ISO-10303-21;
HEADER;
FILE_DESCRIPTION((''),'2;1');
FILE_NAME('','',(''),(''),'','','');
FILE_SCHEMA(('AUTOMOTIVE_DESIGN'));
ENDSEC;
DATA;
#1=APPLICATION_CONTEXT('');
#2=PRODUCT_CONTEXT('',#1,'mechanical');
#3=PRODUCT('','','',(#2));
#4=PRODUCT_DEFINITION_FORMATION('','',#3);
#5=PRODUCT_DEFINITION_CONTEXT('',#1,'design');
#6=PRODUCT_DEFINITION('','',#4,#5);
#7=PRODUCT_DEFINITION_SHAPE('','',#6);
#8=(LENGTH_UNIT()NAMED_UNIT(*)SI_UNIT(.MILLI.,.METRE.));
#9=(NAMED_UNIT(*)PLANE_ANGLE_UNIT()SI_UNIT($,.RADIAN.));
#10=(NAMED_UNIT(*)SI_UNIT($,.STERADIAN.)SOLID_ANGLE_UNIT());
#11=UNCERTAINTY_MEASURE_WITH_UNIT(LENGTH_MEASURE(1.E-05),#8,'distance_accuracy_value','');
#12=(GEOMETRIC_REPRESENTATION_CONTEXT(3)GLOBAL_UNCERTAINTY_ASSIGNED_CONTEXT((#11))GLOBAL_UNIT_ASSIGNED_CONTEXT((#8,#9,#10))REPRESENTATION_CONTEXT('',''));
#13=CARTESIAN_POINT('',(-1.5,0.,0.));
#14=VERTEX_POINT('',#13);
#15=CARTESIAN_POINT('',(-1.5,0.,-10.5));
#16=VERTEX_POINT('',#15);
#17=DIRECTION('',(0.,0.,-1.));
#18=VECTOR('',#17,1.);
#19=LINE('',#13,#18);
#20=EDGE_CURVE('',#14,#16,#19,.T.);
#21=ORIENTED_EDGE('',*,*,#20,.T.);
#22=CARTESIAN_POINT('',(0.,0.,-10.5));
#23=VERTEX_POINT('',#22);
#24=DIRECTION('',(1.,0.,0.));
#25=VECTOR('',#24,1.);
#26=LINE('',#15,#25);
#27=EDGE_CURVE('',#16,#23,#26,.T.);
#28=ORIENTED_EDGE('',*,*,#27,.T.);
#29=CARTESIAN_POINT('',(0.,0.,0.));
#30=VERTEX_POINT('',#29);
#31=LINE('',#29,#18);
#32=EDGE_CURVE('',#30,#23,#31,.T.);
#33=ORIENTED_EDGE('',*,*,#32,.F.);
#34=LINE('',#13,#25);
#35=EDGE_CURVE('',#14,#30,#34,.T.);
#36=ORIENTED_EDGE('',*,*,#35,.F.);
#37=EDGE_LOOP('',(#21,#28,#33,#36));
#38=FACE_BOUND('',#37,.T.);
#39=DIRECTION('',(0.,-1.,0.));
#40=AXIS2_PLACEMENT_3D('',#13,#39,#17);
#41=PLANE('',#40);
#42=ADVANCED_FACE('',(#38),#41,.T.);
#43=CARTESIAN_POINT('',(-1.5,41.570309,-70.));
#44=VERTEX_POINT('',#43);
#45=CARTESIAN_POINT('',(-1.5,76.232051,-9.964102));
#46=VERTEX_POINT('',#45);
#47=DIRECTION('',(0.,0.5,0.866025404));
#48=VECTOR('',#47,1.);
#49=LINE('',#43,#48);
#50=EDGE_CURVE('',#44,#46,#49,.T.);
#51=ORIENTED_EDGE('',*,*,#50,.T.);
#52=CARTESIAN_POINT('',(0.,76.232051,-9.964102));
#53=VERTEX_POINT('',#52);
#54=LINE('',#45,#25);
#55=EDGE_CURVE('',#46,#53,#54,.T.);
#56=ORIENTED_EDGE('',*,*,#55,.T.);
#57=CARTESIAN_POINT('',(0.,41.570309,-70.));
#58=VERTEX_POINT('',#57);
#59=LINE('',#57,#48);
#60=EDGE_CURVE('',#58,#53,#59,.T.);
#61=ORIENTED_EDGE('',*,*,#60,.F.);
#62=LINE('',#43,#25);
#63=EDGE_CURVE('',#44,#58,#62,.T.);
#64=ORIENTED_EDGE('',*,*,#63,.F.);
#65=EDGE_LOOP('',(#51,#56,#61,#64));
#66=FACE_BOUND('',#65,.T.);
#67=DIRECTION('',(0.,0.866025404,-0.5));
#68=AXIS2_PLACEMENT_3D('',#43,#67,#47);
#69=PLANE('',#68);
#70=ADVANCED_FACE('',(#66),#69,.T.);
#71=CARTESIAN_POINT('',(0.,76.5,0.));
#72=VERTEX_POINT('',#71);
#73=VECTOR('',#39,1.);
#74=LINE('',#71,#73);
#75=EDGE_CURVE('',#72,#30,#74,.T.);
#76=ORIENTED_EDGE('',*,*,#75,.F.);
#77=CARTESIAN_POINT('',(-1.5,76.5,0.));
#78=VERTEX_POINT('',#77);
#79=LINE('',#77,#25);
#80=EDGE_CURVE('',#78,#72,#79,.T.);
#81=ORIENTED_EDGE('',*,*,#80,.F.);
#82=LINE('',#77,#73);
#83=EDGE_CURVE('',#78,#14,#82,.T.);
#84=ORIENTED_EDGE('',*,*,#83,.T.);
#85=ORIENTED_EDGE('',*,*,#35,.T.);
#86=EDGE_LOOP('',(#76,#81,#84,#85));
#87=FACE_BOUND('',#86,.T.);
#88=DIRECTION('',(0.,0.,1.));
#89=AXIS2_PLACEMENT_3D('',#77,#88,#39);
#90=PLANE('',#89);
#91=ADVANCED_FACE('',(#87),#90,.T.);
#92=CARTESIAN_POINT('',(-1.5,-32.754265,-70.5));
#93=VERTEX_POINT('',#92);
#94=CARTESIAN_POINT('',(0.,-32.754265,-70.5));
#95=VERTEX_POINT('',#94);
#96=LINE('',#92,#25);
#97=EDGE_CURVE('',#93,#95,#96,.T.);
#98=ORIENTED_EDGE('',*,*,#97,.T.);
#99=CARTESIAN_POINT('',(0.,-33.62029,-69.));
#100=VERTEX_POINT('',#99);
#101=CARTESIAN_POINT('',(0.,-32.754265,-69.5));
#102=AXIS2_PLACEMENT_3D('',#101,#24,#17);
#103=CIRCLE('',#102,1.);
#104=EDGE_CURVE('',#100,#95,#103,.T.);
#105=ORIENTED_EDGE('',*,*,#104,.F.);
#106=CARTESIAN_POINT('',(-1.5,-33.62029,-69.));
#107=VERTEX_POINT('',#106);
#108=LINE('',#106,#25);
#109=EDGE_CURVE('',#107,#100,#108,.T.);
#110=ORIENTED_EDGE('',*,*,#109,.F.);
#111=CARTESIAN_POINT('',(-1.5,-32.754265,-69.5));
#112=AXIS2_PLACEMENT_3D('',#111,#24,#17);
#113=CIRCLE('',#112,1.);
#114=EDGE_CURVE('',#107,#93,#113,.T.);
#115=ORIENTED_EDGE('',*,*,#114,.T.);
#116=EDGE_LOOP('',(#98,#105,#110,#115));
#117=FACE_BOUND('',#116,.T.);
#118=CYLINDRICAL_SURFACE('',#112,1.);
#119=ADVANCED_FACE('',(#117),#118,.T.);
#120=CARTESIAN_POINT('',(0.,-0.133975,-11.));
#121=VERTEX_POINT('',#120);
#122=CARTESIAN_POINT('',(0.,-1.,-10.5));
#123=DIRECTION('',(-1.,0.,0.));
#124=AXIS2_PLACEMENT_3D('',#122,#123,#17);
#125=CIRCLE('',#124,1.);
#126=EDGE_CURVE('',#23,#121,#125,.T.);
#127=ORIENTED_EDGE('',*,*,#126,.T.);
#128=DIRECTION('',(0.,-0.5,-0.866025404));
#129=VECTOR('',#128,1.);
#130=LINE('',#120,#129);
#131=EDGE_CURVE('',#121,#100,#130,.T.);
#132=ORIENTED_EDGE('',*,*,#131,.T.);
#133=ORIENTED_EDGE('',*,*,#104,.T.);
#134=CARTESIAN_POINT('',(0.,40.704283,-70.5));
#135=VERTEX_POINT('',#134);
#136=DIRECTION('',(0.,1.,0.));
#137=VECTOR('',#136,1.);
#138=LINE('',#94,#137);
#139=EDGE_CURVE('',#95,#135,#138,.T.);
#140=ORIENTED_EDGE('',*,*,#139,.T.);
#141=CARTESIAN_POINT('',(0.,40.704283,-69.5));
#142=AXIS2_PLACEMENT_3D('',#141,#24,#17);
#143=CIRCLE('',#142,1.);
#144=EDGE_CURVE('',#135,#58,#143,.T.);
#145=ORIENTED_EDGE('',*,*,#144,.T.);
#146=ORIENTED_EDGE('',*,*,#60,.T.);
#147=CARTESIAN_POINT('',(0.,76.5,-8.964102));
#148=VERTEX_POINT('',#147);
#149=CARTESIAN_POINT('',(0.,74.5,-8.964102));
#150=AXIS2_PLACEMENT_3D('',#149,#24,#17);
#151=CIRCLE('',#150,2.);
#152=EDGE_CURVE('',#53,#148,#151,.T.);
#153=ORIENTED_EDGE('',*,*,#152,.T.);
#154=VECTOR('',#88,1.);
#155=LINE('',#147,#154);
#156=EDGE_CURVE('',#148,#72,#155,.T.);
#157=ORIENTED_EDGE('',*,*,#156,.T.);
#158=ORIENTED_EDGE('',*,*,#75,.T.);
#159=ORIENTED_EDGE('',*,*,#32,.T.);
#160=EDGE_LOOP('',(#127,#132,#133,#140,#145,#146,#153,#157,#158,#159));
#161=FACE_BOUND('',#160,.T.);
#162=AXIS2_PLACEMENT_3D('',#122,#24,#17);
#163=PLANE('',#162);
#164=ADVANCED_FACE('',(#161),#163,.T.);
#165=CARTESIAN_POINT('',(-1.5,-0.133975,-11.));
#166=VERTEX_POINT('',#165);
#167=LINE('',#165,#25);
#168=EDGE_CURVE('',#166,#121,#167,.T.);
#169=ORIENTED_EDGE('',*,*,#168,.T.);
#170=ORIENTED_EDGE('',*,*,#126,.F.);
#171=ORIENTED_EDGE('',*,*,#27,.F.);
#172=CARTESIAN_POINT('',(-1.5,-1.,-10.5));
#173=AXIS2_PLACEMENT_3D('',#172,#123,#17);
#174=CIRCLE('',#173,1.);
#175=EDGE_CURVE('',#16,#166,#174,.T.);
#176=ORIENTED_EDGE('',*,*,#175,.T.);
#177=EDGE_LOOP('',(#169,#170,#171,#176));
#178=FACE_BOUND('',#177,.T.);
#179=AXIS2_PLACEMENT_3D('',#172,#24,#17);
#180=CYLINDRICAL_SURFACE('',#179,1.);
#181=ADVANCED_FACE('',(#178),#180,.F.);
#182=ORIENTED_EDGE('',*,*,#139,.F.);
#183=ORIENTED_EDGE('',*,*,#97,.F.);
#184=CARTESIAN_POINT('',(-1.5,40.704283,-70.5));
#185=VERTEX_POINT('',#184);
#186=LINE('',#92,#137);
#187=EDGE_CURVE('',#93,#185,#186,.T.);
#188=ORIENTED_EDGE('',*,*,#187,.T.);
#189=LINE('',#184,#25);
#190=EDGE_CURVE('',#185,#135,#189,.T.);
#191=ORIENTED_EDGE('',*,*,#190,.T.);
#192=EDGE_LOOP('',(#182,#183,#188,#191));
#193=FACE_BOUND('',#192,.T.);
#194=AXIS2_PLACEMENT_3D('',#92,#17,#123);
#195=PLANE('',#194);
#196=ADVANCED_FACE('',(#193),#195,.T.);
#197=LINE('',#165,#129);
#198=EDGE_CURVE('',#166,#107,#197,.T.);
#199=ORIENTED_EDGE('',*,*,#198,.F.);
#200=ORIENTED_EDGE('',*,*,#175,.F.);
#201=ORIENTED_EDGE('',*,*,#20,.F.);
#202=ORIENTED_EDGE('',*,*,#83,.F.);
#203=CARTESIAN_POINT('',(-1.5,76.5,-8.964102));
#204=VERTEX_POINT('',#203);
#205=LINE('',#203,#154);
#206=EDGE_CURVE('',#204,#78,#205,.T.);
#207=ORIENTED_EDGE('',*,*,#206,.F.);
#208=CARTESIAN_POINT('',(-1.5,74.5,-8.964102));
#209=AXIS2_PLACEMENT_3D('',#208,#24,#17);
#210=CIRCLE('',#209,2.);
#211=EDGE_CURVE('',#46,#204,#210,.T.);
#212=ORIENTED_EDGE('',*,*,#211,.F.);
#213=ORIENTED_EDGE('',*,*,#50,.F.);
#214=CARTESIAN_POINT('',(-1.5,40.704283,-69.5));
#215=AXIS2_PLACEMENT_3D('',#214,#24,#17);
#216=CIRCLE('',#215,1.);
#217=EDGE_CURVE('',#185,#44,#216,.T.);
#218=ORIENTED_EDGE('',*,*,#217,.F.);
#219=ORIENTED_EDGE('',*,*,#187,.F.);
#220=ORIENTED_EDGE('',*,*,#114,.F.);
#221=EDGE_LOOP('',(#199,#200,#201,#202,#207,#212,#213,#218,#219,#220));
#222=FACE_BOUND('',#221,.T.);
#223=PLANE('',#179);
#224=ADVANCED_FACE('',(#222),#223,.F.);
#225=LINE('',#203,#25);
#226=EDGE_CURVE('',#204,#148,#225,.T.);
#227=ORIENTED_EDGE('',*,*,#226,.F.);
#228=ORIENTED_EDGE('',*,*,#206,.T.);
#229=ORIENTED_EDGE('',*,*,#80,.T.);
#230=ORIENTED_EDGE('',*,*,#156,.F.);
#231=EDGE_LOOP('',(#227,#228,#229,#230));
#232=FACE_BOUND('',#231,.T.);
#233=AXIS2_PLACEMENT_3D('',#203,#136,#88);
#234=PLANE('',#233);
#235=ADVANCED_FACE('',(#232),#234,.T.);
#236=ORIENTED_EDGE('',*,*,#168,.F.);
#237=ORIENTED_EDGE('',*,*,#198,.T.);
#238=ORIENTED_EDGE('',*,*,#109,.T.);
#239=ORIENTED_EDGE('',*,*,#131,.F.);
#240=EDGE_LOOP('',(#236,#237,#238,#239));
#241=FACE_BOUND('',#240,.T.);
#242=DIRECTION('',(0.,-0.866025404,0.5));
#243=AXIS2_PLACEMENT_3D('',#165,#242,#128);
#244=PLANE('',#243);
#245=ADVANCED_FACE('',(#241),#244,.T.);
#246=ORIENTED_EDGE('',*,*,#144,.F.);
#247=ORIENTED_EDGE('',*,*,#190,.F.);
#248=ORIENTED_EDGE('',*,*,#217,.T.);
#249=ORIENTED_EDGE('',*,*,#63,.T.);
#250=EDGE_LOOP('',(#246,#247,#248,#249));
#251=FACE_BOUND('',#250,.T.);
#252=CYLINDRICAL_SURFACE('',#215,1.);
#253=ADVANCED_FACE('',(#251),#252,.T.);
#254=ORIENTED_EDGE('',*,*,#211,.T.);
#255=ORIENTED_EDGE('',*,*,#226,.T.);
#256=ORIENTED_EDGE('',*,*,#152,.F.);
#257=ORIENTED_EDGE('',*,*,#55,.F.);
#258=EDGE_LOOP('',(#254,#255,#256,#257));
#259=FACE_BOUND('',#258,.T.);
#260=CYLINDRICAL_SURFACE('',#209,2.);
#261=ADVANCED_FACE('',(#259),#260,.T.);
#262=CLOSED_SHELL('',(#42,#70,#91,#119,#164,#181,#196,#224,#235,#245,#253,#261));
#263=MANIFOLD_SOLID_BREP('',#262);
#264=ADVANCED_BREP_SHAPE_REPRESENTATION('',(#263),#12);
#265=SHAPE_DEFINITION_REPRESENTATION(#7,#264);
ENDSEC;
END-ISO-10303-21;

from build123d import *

# Parameters (mm, degrees)
SM_BASE_FLANGE_1_DEPTH = 1.5


# Sheet-metal steps are written as plain solids
with BuildPart() as part:
    # Sketch 1 → Базовая кромка1 (new body)
    with BuildSketch(Plane(origin=(0, 0, 0), x_dir=(0, 0, -1), z_dir=(1, 0, 0))):
        with BuildLine():
            Line((0, 0), (10.5, 0))
            ThreePointArc((10.5, 0), (10.758819045, -0.034074174), (11, -0.133974596))
            Line((11, -0.133974596), (69, -33.620290209))
            ThreePointArc((69, -33.620290209), (70, -33.620290209), (70.5, -32.754264805))
            Line((70.5, -32.754264805), (70.5, 40.70428331))
            ThreePointArc((70.5, 40.70428331), (70.366025404, 41.20428331), (70, 41.570308714))
            Line((70, 41.570308714), (9.964101615, 76.232050808))
            ThreePointArc((9.964101615, 76.232050808), (9.481739705, 76.431851653), (8.964101615, 76.5))
            Line((8.964101615, 76.5), (0, 76.5))
            Line((0, 76.5), (0, 0))
        make_face()
    extrude(amount=-SM_BASE_FLANGE_1_DEPTH)


solid = part.part
